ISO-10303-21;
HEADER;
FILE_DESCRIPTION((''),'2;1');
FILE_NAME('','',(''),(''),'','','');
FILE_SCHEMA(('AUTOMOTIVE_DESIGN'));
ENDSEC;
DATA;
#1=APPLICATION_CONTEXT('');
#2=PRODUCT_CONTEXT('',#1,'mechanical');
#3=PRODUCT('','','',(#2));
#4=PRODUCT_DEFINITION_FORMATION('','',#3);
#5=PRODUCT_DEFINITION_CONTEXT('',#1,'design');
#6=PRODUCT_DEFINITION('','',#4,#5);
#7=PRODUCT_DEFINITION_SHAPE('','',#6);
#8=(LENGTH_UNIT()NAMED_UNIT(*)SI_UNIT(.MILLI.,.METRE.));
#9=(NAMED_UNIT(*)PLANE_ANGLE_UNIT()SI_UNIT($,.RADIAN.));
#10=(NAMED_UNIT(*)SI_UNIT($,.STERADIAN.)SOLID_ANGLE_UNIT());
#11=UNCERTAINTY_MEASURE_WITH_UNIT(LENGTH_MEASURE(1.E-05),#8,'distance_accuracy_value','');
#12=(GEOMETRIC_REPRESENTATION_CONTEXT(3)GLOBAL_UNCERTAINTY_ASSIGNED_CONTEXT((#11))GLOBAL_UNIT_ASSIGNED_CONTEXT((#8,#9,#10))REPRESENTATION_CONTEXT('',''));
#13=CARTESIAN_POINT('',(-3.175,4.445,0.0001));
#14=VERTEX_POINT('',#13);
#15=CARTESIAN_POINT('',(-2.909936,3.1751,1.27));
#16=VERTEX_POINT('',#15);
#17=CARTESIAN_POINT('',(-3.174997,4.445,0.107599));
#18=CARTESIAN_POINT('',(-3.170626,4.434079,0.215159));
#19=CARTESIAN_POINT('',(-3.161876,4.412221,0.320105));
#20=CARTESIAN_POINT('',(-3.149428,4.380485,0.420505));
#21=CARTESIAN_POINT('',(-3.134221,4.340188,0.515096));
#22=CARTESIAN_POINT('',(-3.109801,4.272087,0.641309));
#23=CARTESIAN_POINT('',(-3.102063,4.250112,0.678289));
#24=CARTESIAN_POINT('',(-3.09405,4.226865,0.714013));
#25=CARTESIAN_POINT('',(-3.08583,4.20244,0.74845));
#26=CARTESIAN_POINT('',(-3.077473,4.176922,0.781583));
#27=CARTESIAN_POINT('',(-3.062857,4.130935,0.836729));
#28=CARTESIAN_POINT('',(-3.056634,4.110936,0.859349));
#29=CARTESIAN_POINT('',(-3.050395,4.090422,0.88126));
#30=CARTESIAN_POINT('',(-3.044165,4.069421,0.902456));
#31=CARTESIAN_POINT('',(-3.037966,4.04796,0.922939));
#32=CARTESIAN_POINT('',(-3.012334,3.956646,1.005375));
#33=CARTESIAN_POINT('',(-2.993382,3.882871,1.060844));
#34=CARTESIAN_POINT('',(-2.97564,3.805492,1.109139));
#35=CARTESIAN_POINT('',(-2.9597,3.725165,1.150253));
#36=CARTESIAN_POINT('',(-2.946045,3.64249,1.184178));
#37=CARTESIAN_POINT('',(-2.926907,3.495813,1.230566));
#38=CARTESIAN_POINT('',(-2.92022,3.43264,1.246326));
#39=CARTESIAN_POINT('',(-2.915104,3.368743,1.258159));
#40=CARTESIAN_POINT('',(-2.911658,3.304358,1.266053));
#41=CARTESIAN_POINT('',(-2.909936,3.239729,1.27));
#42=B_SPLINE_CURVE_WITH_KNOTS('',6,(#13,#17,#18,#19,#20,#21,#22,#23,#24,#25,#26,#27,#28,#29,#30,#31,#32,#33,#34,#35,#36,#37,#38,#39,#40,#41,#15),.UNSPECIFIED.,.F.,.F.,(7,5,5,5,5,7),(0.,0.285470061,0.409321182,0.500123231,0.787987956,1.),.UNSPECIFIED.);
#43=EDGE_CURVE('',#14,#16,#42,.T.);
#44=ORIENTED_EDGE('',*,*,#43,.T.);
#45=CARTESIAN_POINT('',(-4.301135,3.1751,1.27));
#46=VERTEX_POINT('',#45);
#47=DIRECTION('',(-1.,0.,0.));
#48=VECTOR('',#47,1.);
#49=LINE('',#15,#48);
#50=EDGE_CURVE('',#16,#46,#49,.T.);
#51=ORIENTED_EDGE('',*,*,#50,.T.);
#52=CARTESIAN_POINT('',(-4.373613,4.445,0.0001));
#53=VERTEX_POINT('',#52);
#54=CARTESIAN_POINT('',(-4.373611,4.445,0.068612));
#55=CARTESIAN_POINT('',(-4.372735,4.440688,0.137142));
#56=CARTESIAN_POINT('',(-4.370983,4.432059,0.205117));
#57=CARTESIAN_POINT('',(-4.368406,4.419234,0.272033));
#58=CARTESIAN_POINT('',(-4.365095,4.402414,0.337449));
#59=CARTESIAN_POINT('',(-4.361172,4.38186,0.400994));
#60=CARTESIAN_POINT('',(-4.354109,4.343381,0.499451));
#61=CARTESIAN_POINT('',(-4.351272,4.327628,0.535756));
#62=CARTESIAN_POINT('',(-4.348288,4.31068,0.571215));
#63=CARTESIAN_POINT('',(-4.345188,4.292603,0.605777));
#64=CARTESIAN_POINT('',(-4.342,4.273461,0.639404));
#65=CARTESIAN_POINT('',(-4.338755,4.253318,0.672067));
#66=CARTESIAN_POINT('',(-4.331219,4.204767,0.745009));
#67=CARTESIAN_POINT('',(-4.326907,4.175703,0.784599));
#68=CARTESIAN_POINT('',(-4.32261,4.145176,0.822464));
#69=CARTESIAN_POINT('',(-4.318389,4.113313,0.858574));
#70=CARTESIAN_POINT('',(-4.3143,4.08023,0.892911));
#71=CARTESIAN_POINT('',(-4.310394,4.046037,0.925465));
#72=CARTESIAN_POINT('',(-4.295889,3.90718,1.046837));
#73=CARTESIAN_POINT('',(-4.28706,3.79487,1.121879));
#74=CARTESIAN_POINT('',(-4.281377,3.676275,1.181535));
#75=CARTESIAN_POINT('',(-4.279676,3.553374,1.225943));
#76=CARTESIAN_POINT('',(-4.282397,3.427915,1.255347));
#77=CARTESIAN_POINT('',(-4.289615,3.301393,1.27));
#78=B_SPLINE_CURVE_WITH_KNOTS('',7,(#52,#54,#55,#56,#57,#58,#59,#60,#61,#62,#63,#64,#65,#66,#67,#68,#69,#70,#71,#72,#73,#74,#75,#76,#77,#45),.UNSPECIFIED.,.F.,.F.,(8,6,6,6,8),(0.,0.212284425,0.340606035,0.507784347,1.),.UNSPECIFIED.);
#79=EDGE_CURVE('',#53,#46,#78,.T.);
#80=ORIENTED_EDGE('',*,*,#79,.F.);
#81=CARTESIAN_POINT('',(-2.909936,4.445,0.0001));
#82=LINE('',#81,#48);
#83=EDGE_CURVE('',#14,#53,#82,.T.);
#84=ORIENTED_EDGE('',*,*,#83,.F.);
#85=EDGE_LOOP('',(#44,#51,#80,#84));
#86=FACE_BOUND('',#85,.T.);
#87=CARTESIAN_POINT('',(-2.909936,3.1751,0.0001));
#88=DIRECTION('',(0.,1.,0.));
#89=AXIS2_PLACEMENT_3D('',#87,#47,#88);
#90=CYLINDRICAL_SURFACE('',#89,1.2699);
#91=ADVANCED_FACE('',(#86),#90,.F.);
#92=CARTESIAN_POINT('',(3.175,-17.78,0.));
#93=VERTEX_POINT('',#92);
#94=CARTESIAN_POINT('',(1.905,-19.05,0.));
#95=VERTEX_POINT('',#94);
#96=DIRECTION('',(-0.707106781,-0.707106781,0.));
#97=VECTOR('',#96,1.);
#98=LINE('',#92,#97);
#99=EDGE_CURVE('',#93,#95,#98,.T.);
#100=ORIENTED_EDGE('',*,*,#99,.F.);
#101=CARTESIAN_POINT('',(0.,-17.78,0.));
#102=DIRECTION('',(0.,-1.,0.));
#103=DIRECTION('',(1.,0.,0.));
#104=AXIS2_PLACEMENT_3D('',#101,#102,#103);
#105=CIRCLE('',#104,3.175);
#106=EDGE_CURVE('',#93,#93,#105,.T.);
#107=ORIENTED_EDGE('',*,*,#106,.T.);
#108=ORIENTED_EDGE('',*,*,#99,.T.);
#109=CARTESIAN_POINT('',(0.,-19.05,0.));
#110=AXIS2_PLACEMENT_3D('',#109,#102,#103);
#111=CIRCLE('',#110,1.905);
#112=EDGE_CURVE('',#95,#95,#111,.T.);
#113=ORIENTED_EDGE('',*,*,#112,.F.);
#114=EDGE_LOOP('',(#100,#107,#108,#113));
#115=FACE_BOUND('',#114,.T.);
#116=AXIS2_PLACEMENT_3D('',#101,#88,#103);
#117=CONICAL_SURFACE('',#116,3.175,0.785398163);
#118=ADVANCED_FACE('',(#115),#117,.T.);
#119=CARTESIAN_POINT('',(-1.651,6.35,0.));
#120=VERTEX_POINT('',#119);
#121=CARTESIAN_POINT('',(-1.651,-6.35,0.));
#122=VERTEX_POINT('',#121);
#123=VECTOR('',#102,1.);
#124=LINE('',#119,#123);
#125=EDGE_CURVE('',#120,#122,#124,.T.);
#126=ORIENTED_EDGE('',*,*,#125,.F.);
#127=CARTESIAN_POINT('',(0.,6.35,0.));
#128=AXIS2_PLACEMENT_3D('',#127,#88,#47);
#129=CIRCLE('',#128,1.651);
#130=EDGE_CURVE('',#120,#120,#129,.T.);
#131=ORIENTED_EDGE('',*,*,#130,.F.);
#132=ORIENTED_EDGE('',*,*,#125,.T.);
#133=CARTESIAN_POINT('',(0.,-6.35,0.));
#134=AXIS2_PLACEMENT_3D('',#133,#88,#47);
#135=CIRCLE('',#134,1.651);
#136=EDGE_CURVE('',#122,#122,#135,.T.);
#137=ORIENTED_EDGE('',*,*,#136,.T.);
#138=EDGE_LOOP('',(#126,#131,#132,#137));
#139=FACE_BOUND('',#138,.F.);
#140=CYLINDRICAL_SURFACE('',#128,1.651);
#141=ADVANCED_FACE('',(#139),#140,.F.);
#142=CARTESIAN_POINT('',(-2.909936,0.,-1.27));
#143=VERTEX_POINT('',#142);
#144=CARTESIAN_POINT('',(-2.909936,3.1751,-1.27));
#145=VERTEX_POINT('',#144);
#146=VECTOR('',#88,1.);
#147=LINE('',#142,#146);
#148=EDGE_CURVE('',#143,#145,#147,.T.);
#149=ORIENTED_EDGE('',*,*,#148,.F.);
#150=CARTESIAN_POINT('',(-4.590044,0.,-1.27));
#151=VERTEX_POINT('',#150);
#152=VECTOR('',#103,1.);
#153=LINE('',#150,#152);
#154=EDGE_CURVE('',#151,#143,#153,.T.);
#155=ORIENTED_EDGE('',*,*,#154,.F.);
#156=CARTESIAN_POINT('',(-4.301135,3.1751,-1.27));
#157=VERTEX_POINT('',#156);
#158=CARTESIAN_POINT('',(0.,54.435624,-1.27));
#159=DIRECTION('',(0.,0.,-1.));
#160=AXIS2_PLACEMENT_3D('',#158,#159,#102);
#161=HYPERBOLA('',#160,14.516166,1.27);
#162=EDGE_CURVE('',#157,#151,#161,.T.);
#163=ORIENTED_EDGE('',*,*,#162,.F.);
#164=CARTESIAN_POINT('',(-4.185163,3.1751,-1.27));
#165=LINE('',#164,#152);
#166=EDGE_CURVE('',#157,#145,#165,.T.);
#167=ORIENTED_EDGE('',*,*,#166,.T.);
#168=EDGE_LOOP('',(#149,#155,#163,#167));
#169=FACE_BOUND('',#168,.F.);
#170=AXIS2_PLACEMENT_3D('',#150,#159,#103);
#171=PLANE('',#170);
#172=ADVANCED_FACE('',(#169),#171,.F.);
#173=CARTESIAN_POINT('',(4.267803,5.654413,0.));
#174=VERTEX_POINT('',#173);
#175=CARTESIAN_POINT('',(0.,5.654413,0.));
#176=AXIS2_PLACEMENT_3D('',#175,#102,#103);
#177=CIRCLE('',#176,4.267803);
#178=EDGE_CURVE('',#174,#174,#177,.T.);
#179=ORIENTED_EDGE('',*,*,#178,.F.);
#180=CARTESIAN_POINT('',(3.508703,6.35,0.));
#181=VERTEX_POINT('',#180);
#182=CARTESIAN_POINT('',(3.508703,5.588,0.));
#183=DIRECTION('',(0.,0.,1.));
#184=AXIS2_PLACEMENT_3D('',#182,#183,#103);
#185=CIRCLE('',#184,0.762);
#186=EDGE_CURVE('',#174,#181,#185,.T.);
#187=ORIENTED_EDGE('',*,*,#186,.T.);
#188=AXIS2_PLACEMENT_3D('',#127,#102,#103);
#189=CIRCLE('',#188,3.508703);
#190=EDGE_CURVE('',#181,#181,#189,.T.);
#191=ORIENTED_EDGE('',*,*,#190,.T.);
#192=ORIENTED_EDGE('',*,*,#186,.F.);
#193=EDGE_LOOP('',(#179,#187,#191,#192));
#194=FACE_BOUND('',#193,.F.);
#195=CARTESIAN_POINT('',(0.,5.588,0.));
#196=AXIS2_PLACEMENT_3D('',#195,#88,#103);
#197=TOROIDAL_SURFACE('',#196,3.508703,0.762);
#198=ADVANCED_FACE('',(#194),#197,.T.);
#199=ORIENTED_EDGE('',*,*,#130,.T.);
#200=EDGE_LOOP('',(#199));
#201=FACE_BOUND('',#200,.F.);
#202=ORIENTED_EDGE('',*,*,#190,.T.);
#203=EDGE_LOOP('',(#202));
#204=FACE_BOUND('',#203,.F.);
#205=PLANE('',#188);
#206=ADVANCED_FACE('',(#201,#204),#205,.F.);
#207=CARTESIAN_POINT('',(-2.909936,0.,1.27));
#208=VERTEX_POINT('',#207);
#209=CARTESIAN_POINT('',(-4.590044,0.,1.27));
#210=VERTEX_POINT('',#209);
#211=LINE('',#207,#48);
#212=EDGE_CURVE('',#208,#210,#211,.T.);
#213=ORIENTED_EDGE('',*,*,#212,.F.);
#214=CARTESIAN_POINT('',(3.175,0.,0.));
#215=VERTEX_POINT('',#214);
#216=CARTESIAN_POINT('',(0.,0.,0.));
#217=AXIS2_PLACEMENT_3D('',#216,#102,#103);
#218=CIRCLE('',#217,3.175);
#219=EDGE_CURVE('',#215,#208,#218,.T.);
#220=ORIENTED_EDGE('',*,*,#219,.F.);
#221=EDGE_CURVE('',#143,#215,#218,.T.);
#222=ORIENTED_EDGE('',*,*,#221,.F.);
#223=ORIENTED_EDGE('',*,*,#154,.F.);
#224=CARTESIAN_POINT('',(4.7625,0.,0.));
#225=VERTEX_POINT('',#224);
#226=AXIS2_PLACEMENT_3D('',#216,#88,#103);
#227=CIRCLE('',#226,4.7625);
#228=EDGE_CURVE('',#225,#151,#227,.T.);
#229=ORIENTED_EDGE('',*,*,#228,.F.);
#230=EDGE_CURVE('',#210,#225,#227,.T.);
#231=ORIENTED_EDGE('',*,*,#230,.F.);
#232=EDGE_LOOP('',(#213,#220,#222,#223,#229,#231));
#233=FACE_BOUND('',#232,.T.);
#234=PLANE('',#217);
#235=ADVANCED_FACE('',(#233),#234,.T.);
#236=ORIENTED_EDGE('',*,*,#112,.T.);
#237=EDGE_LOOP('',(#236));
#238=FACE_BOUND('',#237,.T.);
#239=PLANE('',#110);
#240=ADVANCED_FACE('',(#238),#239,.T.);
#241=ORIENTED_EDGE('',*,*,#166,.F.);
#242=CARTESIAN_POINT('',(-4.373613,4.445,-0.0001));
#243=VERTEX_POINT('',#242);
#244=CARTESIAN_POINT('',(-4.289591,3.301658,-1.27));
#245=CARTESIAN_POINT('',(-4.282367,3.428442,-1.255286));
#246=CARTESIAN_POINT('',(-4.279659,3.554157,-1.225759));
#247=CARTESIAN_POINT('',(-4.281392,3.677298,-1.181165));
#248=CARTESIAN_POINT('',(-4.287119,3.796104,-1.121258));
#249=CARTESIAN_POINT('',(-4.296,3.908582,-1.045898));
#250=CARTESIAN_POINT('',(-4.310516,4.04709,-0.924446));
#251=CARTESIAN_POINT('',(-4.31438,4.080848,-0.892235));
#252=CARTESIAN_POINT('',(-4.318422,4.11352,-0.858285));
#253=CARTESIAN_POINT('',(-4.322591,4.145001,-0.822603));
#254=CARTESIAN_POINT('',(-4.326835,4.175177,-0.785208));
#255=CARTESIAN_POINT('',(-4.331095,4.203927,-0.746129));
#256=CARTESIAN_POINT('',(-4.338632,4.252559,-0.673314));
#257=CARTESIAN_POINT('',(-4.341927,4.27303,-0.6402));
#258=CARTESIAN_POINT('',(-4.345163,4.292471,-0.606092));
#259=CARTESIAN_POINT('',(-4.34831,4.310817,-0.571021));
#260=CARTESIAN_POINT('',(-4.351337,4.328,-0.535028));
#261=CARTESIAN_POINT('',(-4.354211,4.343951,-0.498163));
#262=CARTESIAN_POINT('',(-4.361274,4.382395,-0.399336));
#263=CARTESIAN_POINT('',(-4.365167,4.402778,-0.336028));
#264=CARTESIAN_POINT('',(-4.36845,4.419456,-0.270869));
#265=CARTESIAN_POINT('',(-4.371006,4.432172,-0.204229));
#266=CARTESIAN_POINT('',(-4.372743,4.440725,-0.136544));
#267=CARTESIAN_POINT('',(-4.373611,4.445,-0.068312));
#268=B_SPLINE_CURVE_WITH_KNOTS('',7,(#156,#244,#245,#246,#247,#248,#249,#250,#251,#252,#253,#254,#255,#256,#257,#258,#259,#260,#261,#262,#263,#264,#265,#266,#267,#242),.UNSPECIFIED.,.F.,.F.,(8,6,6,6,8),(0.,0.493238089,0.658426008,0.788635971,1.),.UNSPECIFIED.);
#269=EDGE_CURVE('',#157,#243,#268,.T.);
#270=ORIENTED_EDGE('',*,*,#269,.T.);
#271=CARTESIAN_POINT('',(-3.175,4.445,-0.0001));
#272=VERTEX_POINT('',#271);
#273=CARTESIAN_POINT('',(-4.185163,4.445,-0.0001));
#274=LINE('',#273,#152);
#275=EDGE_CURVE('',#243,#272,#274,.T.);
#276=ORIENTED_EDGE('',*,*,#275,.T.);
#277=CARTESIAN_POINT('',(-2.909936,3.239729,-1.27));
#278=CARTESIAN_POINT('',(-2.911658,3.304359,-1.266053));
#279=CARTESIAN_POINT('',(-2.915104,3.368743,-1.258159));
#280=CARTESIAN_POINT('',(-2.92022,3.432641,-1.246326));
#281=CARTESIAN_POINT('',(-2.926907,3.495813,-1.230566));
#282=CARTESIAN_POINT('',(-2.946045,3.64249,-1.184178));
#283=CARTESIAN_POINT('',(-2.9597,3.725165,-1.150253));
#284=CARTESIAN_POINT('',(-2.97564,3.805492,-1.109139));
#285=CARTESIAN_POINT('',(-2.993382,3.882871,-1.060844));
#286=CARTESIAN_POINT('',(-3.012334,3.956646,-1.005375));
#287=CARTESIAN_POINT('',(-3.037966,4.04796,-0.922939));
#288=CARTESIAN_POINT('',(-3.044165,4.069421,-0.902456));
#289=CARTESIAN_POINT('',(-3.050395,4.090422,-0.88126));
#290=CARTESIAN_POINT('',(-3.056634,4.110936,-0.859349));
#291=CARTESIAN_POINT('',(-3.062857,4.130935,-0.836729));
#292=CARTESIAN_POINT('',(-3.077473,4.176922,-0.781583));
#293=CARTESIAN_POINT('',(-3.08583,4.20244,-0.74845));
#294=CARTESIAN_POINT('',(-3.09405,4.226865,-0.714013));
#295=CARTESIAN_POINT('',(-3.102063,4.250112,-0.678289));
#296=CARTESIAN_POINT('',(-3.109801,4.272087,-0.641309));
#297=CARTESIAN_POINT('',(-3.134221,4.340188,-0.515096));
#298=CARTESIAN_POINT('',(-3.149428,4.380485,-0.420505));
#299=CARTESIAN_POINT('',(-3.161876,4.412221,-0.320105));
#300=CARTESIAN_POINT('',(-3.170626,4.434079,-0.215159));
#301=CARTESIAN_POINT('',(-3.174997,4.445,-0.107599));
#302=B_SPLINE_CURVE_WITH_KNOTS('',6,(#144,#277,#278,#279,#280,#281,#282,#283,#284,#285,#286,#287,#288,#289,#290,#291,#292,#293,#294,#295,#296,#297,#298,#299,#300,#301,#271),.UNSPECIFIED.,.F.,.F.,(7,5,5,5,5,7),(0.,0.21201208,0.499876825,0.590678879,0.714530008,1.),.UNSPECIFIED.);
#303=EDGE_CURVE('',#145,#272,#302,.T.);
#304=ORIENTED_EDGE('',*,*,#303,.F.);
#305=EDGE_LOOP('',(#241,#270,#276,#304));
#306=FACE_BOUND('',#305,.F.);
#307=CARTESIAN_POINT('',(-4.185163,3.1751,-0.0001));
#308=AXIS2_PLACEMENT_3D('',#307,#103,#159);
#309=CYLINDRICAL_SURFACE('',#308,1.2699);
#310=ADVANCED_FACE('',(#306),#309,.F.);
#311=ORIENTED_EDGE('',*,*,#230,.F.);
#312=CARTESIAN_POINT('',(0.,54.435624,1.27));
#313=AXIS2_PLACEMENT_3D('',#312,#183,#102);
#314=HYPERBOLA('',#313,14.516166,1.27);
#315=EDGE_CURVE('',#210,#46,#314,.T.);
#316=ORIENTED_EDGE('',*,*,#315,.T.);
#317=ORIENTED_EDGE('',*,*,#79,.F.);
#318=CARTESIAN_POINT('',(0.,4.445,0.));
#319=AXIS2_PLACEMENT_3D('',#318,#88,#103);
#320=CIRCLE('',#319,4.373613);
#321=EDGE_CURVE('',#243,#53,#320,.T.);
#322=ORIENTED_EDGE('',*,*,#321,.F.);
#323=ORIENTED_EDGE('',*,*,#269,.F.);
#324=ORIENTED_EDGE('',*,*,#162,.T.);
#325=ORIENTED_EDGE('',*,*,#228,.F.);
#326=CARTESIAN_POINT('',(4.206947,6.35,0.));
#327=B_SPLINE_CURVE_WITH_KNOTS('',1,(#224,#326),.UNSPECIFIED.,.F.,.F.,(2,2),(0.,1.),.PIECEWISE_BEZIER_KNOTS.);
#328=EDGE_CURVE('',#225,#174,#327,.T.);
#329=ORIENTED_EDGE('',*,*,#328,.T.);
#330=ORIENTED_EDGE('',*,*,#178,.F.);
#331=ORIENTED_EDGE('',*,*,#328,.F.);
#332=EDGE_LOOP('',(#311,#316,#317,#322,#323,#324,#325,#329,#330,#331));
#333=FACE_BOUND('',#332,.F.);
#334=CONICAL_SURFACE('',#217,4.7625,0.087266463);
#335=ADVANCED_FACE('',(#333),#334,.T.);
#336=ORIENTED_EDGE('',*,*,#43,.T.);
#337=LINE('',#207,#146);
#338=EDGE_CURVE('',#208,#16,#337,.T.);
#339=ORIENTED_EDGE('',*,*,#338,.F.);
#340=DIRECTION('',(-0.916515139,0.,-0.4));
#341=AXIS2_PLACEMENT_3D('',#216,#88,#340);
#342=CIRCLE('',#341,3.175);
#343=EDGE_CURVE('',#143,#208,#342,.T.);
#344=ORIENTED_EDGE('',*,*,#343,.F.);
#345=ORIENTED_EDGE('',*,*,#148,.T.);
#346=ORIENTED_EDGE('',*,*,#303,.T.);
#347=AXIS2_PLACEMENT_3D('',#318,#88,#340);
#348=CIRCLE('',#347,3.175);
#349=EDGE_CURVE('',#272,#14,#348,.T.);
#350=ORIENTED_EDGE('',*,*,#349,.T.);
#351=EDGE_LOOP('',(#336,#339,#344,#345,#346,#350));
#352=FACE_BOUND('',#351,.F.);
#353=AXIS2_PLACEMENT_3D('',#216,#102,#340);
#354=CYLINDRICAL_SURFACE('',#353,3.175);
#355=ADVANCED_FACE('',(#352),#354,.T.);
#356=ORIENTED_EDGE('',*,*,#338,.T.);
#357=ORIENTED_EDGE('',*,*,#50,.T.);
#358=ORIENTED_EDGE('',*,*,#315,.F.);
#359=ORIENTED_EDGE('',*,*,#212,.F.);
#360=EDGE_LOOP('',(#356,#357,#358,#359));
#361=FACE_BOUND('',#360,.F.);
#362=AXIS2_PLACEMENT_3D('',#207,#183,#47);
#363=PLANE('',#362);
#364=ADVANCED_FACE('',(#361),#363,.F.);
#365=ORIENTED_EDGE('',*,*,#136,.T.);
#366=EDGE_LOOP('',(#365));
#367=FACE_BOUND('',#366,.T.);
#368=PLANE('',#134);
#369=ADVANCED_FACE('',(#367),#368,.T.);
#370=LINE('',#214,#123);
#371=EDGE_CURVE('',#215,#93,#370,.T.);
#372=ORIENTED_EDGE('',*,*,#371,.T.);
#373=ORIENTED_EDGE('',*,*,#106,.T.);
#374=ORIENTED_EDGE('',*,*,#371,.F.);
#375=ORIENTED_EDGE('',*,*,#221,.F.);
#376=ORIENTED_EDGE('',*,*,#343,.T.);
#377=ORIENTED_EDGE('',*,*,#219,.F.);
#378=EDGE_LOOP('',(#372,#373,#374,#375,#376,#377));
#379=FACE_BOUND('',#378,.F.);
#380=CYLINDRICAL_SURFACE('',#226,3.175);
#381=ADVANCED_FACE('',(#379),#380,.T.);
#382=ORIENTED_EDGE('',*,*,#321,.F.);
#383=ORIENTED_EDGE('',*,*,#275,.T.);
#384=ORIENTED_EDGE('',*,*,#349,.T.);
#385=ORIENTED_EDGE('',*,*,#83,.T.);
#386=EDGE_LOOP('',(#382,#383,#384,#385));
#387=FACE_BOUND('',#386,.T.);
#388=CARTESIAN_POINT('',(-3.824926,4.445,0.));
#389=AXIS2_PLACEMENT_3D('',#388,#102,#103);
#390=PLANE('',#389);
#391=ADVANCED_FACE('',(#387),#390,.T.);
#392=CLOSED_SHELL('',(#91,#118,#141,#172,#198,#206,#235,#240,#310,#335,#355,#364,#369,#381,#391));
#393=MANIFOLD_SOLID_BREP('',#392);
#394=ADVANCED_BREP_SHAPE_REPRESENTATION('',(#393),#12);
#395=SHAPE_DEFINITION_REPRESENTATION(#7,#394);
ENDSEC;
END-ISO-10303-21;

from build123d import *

# Parameters (mm, degrees)
F0_R     = 4.7625
F1_DEPTH = 6.35
F1_TAPER = 5
F2_R     = 3.175
F3_DEPTH = 19.05
F4_R     = 1.651
F5_DEPTH = 12.7
F6_SIZE  = 1.27
F7_R     = 0.762
F9_DEPTH = 4.445
F10_R    = 1.2699


# Not quite as in the source:
# - a fillet or chamfer is up to 0.001 mm smaller than in the source, because OpenCascade refuses the exact size
# - after a boolean that leaves OpenCascade's solid faulty, fix() repairs it


with BuildPart() as f1:
    # F0 (on Front) → F1 (new body)
    with BuildSketch(Plane.XZ):
        Circle(F0_R)
    extrude(amount=-F1_DEPTH, taper=F1_TAPER)

    # F2 (on face) → F3 (join)
    with BuildSketch(Plane.XZ):
        Circle(F2_R)
    extrude(amount=F3_DEPTH)

    # F4 (on face) → F5 (cut)
    with BuildSketch(Plane(origin=(0, 6.35, 0), x_dir=(-1, 0, 0), z_dir=(0, 1, 0))):
        Circle(F4_R)
    extrude(amount=-F5_DEPTH, mode=Mode.SUBTRACT)

    # F6
    f6_edges = [f1.edges().sort_by_distance(p)[0] for p in [
        (-3.175, -19.05, 0),
    ]]
    chamfer(f6_edges, length=F6_SIZE)

    # F7
    f7_edges = [f1.edges().sort_by_distance(p)[0] for p in [
        (-4.206947, 6.35, 0),
    ]]
    fillet(f7_edges, radius=F7_R)

    # F8 (on face) → F9 (cut)
    with BuildSketch(Plane.XZ):
        with BuildLine():
            ThreePointArc((-2.9099355663, -1.27), (-3.175, 0), (-2.9099355663, 1.27))
            Line((-2.9099355663, 1.27), (-4.5900442536, 1.27))
            ThreePointArc((-4.5900442536, 1.27), (-4.7625, 0), (-4.5900442536, -1.27))
            Line((-4.5900442536, -1.27), (-2.9099355663, -1.27))
        make_face()
    extrude(amount=-F9_DEPTH, mode=Mode.SUBTRACT)

    add(f1.part.fix(), mode=Mode.REPLACE)

    # F10 (radius 1.27 in the source; OpenCascade refuses exactly that, so slightly less here)
    f10_edges = [f1.edges().sort_by_distance(p)[0] for p in [
        (-3.547549, 4.445, 1.27),
        (-3.547549, 4.445, -1.27),
    ]]
    fillet(f10_edges, radius=F10_R)


solid = f1.part
